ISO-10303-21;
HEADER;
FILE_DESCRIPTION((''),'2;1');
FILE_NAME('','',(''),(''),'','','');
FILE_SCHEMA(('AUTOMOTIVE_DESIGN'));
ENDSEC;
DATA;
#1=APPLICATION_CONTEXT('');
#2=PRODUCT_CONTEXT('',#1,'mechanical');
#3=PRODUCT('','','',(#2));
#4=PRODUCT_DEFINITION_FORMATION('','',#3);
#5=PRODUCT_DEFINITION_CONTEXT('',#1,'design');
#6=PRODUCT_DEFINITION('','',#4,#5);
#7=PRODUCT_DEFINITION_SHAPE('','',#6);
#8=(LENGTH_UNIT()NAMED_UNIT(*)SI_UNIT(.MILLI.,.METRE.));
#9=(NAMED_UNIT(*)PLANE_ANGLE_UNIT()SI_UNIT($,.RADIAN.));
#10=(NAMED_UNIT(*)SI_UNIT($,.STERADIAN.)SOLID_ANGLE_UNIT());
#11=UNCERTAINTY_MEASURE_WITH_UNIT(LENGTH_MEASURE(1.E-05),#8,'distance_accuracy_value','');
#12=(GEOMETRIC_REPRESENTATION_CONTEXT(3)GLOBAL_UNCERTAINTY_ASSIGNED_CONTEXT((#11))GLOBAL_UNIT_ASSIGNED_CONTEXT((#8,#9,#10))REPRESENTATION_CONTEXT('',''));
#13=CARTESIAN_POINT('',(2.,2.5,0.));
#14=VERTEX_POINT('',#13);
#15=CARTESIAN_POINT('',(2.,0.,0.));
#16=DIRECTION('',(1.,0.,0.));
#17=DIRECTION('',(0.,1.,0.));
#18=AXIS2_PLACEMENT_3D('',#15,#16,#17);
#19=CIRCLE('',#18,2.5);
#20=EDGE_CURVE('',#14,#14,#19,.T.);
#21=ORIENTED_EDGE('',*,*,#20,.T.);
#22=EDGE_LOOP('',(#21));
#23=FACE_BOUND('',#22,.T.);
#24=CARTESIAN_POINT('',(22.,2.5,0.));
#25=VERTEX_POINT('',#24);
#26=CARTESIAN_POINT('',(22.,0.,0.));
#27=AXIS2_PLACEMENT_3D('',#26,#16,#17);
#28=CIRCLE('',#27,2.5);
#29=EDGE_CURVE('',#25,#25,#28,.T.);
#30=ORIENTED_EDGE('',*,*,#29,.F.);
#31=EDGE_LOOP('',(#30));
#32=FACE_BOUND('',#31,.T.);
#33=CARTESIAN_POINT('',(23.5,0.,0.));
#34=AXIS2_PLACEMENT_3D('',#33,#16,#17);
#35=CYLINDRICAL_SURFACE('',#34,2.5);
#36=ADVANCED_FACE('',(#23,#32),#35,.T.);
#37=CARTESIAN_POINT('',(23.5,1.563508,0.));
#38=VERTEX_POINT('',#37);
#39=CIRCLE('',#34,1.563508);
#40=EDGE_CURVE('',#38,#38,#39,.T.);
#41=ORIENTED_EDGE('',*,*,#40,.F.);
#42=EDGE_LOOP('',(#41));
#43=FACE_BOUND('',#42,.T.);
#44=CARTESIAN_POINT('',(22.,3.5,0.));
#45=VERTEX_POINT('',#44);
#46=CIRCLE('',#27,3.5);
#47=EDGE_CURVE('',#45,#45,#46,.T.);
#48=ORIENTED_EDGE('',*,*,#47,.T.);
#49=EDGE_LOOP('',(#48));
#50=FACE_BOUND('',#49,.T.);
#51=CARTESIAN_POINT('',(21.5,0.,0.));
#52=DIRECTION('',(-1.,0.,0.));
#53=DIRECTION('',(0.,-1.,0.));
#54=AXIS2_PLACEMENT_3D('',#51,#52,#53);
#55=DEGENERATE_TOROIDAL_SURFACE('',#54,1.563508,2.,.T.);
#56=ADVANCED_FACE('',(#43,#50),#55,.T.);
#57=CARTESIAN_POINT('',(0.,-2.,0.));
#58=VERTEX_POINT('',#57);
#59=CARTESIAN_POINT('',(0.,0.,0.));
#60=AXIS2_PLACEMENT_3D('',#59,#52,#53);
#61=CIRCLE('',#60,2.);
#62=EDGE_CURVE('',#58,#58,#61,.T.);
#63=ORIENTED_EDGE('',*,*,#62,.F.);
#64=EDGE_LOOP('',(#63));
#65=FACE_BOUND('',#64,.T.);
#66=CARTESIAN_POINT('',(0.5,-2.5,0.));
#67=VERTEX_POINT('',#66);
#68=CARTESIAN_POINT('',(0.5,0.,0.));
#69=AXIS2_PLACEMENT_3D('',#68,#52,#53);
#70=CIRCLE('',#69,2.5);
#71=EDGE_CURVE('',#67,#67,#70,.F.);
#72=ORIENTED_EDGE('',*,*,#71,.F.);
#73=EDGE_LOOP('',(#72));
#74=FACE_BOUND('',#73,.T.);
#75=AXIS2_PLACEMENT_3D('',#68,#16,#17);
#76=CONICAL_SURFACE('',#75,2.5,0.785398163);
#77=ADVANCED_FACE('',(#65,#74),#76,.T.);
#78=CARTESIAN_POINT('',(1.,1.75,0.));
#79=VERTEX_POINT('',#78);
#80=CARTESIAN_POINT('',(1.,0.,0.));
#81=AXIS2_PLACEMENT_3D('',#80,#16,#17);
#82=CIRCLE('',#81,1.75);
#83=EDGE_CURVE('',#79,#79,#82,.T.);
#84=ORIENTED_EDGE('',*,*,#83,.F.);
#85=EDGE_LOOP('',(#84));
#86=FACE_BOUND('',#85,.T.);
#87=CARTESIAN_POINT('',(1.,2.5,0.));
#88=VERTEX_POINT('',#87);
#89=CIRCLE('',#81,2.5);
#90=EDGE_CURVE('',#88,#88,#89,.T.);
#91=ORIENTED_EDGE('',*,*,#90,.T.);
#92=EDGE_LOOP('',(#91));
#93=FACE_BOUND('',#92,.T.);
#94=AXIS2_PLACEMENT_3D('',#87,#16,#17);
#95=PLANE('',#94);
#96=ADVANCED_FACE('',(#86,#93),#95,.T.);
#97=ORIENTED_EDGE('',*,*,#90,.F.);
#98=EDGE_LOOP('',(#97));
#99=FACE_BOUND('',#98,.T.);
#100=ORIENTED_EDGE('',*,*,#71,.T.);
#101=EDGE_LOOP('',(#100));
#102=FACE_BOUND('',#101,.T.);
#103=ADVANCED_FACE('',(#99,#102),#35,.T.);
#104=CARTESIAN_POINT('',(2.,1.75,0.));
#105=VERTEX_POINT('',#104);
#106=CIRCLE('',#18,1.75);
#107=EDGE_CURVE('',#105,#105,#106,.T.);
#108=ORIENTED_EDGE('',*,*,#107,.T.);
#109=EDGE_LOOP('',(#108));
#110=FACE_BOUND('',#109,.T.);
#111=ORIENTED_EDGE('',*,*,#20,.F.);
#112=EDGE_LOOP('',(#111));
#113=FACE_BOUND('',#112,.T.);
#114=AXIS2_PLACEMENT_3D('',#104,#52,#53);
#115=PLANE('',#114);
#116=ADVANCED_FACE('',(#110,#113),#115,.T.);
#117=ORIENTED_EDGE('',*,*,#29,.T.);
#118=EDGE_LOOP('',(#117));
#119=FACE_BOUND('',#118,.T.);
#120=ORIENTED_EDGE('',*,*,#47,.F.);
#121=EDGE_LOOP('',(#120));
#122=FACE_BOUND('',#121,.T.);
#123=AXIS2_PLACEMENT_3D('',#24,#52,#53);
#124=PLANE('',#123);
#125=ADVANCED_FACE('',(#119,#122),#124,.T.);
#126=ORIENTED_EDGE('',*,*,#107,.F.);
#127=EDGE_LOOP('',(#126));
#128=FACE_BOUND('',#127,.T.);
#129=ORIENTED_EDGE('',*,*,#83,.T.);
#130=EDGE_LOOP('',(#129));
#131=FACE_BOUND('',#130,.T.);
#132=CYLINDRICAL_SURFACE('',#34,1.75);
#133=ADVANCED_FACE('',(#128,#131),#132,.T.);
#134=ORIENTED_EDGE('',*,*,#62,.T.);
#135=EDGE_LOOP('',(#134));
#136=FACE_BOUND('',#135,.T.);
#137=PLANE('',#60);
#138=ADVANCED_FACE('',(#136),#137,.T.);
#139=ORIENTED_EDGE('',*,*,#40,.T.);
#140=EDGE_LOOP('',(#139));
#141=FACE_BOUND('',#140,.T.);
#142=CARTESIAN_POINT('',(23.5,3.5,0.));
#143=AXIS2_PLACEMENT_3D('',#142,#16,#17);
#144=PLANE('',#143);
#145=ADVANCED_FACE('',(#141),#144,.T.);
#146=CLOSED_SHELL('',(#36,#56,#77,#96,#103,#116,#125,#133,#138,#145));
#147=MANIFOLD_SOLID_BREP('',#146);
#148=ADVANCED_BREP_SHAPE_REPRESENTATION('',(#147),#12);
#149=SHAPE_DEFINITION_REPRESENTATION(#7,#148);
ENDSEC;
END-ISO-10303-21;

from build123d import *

# Parameters (mm, degrees)
FILLET1_R     = 2
CHAMFER1_SIZE = 0.5


with BuildPart() as part:
    # Sketch1 → Revolve1 (revolve)
    with BuildSketch(Plane.XY):
        Polygon((0, 0), (0, 2.5), (1, 2.5), (1, 1.75), (2, 1.75), (2, 2.5), (22, 2.5), (22, 3.5), (23.5, 3.5), (23.5, 0), align=None)
    revolve(axis=Axis((23.5, 0, 0), (-1, 0, 0)))

    # Fillet1
    # the kernel refuses this fillet: 2 mm, written as the material it takes off along each edge
    with BuildSketch(Plane(origin=(23.5, 0, 0), x_dir=(0, 1, 0), z_dir=(0, 0, 1))) as fillet1_piece_1:
        with BuildLine():
            CenterArc((1.563508327, 2), FILLET1_R, 270, 75.522487814)
            Line((1.563508327, 0), (1.563508327, -0.04))
            Line((1.563508327, -0.04), (3.5, -0.04))
            Line((3.5, -0.04), (3.54, 0))
            ThreePointArc((3.54, 0), (3.54, 0.75), (3.538729833, 1.49))
            Line((3.538729833, 1.49), (3.5, 1.5))
        make_face()
    revolve(axis=Axis((23.5, 0, 0), (-1, 0, 0)), mode=Mode.SUBTRACT)

    # Chamfer1
    chamfer1_edges = [part.edges().sort_by_distance(p)[0] for p in [
        (0, -2.5, 0),
    ]]
    chamfer(chamfer1_edges, length=CHAMFER1_SIZE)


solid = part.part
